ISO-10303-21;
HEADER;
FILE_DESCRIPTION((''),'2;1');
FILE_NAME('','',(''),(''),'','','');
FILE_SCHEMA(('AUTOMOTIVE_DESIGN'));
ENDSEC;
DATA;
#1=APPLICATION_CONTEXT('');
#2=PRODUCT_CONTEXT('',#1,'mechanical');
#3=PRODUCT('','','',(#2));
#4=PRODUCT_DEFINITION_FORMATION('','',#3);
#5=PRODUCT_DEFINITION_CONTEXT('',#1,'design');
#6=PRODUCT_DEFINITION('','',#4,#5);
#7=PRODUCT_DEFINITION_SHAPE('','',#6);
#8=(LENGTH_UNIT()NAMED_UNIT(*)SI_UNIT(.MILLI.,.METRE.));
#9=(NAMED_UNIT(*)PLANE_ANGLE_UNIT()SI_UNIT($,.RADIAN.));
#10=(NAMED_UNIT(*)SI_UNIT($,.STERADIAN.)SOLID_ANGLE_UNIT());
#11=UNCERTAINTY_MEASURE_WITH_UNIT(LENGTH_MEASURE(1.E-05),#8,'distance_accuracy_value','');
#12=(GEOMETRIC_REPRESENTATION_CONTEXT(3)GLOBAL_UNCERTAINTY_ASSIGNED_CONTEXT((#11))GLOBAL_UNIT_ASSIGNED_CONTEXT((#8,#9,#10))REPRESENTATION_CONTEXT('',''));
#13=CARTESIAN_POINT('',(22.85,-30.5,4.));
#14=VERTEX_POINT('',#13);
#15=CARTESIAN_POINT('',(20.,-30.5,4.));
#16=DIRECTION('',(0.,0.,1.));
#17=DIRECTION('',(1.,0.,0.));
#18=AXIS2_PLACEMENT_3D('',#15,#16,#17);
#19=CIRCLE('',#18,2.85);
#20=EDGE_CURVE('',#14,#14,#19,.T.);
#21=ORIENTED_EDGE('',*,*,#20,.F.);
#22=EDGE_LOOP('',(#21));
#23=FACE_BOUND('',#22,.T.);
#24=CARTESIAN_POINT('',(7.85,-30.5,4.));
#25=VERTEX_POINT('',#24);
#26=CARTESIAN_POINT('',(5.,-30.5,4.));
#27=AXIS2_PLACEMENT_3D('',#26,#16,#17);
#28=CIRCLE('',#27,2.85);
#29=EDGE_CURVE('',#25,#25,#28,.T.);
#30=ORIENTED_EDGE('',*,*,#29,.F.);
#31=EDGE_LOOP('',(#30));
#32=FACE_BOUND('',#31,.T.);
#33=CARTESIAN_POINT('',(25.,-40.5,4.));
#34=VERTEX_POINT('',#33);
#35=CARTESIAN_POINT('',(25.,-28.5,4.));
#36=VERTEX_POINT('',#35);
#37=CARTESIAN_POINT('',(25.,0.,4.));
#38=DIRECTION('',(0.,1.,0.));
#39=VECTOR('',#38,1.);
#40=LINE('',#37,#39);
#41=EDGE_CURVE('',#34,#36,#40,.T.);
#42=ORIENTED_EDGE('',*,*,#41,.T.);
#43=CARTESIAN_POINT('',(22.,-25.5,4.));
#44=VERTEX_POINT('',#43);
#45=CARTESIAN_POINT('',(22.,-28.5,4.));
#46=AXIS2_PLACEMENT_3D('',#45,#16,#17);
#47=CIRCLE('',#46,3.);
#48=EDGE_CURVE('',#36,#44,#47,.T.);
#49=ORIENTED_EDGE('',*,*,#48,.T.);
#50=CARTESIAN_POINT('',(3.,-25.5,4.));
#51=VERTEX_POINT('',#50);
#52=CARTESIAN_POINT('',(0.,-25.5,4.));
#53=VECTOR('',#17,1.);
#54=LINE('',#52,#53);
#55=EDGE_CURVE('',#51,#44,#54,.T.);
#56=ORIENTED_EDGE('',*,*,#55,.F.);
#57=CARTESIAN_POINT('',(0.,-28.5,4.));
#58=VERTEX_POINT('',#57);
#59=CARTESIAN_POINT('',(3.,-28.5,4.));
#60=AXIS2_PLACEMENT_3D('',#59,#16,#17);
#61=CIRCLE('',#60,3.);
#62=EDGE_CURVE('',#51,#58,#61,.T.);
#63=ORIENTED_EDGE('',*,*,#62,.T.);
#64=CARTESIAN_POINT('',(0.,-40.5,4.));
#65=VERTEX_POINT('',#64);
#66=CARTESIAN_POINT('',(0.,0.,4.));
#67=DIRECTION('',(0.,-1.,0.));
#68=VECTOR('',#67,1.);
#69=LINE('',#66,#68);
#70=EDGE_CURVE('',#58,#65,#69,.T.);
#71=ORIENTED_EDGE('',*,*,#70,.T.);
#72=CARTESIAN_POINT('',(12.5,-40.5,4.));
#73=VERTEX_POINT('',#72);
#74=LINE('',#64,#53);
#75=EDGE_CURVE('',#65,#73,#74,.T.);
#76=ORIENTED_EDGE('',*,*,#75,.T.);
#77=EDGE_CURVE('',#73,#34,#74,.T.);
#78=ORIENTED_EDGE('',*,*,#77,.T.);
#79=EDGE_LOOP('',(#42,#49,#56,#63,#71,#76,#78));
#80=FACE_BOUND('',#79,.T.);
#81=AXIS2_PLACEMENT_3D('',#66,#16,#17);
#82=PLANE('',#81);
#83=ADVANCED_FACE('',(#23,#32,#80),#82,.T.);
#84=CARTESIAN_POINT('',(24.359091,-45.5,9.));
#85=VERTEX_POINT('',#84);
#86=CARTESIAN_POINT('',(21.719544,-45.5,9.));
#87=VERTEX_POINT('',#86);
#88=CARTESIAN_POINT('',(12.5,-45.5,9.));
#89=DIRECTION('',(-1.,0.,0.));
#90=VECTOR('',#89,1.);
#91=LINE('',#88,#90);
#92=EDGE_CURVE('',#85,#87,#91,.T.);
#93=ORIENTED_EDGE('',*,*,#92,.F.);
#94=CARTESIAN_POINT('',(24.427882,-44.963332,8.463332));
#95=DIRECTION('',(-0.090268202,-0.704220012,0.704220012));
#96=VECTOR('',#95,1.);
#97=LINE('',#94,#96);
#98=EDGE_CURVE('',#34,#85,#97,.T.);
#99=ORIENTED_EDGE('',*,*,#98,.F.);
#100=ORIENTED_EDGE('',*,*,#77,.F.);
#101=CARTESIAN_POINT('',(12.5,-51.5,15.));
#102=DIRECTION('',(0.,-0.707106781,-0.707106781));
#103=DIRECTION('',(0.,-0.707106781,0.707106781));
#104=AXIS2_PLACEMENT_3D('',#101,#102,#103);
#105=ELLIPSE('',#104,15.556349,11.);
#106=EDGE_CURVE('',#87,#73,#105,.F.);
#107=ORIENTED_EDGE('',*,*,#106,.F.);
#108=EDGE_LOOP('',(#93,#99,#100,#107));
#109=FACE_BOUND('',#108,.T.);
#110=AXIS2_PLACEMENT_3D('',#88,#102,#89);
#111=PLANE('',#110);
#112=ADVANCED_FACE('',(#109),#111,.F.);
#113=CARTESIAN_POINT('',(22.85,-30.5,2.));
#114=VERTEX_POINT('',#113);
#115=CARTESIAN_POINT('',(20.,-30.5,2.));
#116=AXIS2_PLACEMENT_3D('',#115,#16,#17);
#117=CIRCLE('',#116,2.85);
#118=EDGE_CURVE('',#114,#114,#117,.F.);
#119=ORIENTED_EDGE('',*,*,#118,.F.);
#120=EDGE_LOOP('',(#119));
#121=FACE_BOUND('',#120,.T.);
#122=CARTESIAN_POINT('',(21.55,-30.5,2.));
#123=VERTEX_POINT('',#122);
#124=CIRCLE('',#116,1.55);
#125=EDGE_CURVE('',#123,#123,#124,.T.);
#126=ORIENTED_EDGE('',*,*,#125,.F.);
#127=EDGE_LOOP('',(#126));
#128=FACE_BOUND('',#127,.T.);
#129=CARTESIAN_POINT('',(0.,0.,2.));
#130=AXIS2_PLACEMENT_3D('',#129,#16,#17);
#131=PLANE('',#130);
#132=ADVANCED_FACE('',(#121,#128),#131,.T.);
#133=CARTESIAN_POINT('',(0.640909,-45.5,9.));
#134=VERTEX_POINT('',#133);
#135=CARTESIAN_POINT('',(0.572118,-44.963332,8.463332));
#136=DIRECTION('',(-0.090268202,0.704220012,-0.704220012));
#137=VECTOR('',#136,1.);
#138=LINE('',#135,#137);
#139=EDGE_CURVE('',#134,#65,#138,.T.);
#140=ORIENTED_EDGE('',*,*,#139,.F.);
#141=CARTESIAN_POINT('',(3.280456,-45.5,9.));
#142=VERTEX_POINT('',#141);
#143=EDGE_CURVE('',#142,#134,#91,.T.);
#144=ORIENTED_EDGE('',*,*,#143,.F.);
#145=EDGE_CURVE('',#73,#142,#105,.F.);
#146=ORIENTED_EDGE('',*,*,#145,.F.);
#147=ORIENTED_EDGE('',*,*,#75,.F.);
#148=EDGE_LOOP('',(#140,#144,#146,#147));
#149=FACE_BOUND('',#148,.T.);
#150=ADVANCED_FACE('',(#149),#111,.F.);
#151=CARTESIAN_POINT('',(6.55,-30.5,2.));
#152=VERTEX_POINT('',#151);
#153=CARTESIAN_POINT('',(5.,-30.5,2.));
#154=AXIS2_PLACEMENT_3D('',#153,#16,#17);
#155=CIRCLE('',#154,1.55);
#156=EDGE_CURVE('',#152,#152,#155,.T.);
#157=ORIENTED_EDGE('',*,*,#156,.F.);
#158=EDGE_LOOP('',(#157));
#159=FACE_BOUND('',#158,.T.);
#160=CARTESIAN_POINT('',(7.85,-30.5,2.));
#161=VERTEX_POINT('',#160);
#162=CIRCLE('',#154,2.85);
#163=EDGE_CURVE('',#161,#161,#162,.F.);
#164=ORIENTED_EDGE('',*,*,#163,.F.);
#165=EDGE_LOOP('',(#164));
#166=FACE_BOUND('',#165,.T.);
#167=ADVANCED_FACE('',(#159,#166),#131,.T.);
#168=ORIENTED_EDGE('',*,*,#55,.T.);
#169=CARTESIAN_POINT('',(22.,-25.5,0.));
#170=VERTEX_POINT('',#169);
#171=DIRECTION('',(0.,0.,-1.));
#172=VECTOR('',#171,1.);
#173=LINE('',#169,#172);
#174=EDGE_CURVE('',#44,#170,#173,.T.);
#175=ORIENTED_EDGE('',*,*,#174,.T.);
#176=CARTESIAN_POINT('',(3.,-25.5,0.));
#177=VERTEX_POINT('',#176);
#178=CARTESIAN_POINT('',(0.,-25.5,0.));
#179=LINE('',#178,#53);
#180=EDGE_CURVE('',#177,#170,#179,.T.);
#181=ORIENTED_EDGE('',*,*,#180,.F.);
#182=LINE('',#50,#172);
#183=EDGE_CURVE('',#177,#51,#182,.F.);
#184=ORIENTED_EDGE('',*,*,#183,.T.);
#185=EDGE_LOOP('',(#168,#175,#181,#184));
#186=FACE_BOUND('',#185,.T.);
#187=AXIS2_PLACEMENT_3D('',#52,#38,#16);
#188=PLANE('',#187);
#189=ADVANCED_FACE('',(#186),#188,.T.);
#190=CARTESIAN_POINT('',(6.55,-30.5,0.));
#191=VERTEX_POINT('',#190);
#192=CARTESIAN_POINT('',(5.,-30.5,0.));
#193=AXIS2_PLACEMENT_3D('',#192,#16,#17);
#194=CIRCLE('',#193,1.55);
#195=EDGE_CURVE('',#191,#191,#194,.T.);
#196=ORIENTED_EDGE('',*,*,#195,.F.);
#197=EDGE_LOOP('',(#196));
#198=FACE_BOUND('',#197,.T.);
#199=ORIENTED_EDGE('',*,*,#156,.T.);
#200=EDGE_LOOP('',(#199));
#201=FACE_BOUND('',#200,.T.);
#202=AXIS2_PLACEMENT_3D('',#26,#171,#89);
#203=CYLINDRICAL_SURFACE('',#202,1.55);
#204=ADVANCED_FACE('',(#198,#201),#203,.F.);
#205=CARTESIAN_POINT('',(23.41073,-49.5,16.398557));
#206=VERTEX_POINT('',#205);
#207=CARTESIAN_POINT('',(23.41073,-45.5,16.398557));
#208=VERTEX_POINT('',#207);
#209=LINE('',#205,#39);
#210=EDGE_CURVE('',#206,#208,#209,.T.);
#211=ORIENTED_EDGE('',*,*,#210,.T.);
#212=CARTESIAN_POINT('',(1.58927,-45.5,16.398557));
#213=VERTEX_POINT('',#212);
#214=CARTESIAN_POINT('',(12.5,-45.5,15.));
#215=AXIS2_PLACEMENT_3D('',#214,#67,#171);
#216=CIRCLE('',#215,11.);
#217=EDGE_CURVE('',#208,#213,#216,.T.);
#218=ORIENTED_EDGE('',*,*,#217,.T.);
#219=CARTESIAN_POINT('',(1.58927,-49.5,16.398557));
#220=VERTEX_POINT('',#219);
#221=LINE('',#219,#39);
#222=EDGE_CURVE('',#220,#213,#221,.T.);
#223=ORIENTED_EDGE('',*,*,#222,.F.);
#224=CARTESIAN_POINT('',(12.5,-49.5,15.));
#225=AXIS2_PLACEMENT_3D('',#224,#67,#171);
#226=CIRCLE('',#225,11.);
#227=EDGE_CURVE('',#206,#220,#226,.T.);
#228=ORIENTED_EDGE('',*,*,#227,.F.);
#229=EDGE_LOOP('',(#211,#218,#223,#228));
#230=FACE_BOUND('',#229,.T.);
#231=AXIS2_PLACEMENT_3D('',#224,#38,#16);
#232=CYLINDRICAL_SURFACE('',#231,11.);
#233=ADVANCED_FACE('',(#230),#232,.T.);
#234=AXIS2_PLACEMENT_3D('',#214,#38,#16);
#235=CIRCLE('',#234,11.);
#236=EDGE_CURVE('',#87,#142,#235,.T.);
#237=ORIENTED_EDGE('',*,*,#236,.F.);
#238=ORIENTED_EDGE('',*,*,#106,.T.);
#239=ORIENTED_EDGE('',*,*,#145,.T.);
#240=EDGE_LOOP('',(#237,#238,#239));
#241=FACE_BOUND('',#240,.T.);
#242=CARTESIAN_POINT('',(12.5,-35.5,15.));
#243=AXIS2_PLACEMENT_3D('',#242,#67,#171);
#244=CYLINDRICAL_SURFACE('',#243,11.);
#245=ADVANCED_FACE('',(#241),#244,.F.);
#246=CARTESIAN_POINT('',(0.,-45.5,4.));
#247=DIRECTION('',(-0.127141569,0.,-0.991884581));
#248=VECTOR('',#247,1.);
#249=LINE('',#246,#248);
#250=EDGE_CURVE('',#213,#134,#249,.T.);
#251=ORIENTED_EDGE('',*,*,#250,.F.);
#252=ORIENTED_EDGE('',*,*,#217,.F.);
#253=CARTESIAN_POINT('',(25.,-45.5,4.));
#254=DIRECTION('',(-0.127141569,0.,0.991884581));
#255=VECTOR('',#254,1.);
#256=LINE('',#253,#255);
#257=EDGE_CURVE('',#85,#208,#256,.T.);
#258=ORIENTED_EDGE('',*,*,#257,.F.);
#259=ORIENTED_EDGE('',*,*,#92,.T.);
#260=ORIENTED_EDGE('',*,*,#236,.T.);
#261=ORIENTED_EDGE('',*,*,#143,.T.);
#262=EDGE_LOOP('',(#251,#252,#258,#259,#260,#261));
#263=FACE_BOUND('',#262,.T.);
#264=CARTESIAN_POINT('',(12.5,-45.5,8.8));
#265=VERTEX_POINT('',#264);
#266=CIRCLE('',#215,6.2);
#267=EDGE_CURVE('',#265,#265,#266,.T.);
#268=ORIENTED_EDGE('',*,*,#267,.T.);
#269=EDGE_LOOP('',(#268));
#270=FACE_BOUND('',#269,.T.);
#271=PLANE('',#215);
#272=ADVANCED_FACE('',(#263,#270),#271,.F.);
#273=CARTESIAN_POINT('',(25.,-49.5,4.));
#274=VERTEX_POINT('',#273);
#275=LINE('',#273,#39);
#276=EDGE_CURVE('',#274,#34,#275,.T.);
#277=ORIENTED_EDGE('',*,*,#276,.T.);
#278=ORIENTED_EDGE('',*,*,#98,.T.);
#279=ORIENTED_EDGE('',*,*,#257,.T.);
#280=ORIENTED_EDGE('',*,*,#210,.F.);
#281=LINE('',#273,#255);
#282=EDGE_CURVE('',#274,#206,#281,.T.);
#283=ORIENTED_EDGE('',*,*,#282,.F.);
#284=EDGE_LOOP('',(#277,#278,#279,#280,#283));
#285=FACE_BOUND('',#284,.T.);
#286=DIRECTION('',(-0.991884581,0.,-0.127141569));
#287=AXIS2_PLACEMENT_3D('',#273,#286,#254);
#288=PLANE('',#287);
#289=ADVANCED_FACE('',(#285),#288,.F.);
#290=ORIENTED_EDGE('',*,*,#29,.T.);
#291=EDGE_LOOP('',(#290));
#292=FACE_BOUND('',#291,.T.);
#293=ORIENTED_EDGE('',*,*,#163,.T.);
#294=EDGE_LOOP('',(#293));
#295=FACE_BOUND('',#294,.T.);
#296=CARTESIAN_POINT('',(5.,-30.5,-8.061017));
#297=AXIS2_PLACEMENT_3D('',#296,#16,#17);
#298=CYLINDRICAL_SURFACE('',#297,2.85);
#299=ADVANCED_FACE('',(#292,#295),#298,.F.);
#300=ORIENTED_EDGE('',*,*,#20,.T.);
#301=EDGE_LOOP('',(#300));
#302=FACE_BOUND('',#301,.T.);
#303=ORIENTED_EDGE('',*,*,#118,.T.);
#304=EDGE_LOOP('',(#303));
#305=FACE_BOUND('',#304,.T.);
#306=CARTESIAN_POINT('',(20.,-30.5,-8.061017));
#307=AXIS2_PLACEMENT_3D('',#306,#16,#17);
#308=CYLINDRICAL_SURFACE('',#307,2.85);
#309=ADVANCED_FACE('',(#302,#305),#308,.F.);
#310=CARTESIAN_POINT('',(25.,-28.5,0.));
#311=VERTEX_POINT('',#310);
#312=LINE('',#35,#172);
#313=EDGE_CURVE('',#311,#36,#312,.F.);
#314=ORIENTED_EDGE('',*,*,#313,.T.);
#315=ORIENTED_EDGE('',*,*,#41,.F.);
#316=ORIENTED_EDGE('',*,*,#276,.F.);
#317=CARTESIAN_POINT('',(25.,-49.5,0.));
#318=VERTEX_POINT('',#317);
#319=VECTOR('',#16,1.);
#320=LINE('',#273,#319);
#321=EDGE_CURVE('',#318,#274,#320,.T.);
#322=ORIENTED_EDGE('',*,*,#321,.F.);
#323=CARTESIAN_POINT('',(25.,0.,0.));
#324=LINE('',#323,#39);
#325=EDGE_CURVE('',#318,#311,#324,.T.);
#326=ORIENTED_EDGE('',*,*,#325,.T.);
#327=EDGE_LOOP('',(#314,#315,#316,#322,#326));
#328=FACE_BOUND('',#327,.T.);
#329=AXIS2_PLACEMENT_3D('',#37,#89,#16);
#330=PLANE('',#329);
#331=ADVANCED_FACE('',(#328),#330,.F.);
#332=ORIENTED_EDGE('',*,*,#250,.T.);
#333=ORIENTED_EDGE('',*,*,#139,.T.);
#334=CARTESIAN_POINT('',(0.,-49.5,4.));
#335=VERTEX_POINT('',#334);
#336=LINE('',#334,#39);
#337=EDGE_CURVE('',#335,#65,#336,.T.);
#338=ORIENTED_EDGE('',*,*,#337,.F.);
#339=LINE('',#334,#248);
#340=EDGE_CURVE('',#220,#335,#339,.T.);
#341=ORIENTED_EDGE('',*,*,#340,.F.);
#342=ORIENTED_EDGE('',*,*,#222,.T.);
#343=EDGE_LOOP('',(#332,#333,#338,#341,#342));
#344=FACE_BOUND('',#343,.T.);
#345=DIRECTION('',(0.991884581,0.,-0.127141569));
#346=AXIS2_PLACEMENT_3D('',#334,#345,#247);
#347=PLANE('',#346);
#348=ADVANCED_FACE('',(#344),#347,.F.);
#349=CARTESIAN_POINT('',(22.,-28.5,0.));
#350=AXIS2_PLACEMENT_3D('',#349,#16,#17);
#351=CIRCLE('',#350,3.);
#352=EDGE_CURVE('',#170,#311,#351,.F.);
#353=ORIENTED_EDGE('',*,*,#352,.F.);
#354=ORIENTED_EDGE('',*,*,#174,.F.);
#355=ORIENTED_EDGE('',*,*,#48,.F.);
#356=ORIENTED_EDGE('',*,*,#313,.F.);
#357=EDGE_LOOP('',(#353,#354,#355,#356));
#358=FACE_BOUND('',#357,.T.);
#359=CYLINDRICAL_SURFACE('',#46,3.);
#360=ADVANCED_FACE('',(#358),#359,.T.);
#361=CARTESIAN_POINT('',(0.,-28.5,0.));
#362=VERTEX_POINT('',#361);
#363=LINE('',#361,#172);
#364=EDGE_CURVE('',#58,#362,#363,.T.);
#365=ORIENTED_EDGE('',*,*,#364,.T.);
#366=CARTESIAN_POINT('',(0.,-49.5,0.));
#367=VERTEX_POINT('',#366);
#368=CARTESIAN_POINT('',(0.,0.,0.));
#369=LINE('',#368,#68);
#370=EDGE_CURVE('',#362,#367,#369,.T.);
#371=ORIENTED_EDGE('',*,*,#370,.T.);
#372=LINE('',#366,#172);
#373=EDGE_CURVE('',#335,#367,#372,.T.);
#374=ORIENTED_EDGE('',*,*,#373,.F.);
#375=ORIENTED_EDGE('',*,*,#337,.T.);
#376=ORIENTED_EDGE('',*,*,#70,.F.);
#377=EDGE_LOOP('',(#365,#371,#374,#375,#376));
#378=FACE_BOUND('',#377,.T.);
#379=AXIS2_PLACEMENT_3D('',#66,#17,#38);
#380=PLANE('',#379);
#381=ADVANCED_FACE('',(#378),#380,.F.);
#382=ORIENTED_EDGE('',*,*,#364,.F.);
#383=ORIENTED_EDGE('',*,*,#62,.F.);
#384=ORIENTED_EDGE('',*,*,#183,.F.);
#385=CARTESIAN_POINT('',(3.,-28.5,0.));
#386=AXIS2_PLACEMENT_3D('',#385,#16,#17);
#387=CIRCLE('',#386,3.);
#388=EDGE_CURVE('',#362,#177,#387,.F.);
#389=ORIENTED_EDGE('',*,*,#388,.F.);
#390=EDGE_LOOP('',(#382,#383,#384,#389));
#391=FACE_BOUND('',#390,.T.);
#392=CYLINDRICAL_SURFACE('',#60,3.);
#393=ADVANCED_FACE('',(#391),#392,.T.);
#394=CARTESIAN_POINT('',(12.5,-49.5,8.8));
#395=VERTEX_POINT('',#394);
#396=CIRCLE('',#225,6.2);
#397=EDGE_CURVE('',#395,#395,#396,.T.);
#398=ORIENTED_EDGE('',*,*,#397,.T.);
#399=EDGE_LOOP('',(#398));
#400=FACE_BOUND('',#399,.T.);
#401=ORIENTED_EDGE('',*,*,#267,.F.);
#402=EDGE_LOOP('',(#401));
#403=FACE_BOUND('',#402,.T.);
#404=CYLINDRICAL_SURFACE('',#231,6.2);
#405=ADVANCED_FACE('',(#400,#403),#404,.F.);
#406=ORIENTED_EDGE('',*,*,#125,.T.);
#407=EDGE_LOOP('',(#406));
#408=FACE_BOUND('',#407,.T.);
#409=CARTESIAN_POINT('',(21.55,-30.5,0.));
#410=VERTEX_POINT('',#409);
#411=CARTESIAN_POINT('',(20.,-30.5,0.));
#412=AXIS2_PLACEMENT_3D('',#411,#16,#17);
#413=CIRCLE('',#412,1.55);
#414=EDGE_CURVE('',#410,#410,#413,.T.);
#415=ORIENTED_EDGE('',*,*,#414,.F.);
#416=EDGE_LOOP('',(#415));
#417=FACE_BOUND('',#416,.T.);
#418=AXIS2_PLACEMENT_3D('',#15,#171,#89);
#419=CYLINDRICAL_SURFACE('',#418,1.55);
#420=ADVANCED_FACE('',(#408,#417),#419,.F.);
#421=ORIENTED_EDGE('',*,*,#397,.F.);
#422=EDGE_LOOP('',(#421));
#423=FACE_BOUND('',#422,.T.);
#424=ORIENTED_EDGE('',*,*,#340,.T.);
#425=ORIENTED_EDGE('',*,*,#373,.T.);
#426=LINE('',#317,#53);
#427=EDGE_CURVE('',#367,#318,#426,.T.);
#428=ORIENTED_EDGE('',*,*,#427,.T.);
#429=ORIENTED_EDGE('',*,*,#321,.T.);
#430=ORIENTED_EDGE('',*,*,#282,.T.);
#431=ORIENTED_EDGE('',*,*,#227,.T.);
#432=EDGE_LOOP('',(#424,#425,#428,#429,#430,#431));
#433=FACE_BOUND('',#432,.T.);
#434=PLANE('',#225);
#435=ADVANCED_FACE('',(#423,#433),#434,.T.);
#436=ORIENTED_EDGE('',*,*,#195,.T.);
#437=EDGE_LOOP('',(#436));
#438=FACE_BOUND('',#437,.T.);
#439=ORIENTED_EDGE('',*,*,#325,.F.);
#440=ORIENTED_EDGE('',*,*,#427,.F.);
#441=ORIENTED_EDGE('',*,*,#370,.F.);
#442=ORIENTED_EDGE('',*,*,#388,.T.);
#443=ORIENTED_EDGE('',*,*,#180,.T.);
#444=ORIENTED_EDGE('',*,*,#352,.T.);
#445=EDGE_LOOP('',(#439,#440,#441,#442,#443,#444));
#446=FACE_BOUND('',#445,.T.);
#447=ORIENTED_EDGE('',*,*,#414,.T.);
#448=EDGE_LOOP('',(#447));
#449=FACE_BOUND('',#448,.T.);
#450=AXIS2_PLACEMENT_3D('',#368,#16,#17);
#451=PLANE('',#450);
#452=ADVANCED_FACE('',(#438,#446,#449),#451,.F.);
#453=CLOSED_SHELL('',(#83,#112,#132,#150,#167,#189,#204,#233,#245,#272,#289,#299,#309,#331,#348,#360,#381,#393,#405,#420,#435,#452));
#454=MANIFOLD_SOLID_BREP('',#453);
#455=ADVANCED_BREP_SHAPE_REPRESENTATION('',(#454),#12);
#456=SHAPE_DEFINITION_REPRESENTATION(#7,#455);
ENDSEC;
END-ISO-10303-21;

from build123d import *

# Parameters (mm, degrees)
SKETCH1_W           = 25
SKETCH1_H           = 10
SKETCH1_R           = 1.55
BOSS_EXTRUDE1_DEPTH = 4
SKETCH2_W           = 25
SKETCH2_H           = 4
BOSS_EXTRUDE2_DEPTH = 10
SKETCH3_R           = 6.2
BOSS_EXTRUDE3_DEPTH = 4
CHAMFER1_SIZE       = 5
CUT_EXTRUDE1_START  = 10
SKETCH4_R           = 11
CUT_EXTRUDE1_DEPTH  = 10
FILLET1_R           = 3
SKETCH5_R           = 2.85
CUT_EXTRUDE2_DEPTH  = 2


with BuildPart() as part:
    # Sketch1 → Boss-Extrude1 (new body)
    with BuildSketch(Plane.XY):
        with Locations((12.5, -30.5)):
            Rectangle(SKETCH1_W, SKETCH1_H)
        with Locations((5, -30.5)):
            Circle(SKETCH1_R, mode=Mode.SUBTRACT)
        with Locations((20, -30.5)):
            Circle(SKETCH1_R, mode=Mode.SUBTRACT)
    extrude(amount=BOSS_EXTRUDE1_DEPTH)

    # Sketch2 → Boss-Extrude2 (add)
    with BuildSketch(Plane.XZ.offset(35.5)):
        with Locations((12.5, 2)):
            Rectangle(SKETCH2_W, SKETCH2_H)
    extrude(amount=BOSS_EXTRUDE2_DEPTH)

    # Sketch3 → Boss-Extrude3 (add)
    with BuildSketch(Plane.XZ.offset(45.5)):
        with BuildLine():
            Line((0, 4), (1.589269612, 16.398557259))
            ThreePointArc((1.589269612, 16.398557259), (12.5, 26), (23.410730388, 16.398557259))
            Line((23.410730388, 16.398557259), (25, 4))
            Line((25, 4), (25, 0))
            Line((25, 0), (0, 0))
            Line((0, 0), (0, 4))
        make_face()
        with Locations(Location((12.5, 15, 0), (0, 0, 270))):
            Circle(SKETCH3_R, mode=Mode.SUBTRACT)
    extrude(amount=BOSS_EXTRUDE3_DEPTH)

    # Chamfer1
    # the kernel refuses this chamfer: 5 mm, written as the material it adds along each edge
    with BuildSketch(Plane(origin=(25, -45.5, 4), x_dir=(0, 0.9996219169112968, -0.027495876610586403), z_dir=(-1, 0, 0))) as chamfer1_piece_1_section:
        Polygon((CHAMFER1_SIZE * 0.999621916911, -CHAMFER1_SIZE * 0.0274958766106), (-CHAMFER1_SIZE * 0.0274958766106, -CHAMFER1_SIZE * 0.999621916911), (0, 0), align=None)
    chamfer1_piece_1 = extrude(amount=25, mode=Mode.PRIVATE)
    chamfer1_piece_1 = split(chamfer1_piece_1, bisect_by=Plane(origin=(24.592329288, -43.84115056, 7.18040981), z_dir=(-0.9918845807033364, 0, -0.12714156898106382)), keep=Keep.TOP, mode=Mode.PRIVATE)
    chamfer1_piece_1 = split(chamfer1_piece_1, bisect_by=Plane(origin=(0.407670712, -43.84115056, 7.18040981), z_dir=(0.9918845807033364, 0, -0.12714156898106413)), keep=Keep.TOP, mode=Mode.PRIVATE)
    chamfer1_piece_1 = chamfer1_piece_1 - Plane(origin=(12.5, -43.84115056, 15), x_dir=(0, 0, -1), z_dir=(0, 1, 0)) * Cylinder(6.2, 70, mode=Mode.PRIVATE)
    add(chamfer1_piece_1)

    # Sketch4 → Cut-Extrude1 (cut)
    with BuildSketch(Plane(origin=(0, -45.5, 0), x_dir=(1, 0, 0), z_dir=(0, 1, 0)).offset(CUT_EXTRUDE1_START)):
        with Locations((12.5, -15)):
            Circle(SKETCH4_R)
    extrude(amount=-CUT_EXTRUDE1_DEPTH, mode=Mode.SUBTRACT)

    # Fillet1
    fillet1_edges = [part.edges().sort_by_distance(p)[0] for p in [
        (25, -25.5, 2),
        (0, -25.5, 2),
    ]]
    fillet(fillet1_edges, radius=FILLET1_R)

    # Sketch5 → Cut-Extrude2 (cut)
    with BuildSketch(Plane.XY.offset(4)):
        with Locations((20, -30.5)):
            Circle(SKETCH5_R)
        with Locations((5, -30.5)):
            Circle(SKETCH5_R)
    extrude(amount=-CUT_EXTRUDE2_DEPTH, mode=Mode.SUBTRACT)


solid = part.part
